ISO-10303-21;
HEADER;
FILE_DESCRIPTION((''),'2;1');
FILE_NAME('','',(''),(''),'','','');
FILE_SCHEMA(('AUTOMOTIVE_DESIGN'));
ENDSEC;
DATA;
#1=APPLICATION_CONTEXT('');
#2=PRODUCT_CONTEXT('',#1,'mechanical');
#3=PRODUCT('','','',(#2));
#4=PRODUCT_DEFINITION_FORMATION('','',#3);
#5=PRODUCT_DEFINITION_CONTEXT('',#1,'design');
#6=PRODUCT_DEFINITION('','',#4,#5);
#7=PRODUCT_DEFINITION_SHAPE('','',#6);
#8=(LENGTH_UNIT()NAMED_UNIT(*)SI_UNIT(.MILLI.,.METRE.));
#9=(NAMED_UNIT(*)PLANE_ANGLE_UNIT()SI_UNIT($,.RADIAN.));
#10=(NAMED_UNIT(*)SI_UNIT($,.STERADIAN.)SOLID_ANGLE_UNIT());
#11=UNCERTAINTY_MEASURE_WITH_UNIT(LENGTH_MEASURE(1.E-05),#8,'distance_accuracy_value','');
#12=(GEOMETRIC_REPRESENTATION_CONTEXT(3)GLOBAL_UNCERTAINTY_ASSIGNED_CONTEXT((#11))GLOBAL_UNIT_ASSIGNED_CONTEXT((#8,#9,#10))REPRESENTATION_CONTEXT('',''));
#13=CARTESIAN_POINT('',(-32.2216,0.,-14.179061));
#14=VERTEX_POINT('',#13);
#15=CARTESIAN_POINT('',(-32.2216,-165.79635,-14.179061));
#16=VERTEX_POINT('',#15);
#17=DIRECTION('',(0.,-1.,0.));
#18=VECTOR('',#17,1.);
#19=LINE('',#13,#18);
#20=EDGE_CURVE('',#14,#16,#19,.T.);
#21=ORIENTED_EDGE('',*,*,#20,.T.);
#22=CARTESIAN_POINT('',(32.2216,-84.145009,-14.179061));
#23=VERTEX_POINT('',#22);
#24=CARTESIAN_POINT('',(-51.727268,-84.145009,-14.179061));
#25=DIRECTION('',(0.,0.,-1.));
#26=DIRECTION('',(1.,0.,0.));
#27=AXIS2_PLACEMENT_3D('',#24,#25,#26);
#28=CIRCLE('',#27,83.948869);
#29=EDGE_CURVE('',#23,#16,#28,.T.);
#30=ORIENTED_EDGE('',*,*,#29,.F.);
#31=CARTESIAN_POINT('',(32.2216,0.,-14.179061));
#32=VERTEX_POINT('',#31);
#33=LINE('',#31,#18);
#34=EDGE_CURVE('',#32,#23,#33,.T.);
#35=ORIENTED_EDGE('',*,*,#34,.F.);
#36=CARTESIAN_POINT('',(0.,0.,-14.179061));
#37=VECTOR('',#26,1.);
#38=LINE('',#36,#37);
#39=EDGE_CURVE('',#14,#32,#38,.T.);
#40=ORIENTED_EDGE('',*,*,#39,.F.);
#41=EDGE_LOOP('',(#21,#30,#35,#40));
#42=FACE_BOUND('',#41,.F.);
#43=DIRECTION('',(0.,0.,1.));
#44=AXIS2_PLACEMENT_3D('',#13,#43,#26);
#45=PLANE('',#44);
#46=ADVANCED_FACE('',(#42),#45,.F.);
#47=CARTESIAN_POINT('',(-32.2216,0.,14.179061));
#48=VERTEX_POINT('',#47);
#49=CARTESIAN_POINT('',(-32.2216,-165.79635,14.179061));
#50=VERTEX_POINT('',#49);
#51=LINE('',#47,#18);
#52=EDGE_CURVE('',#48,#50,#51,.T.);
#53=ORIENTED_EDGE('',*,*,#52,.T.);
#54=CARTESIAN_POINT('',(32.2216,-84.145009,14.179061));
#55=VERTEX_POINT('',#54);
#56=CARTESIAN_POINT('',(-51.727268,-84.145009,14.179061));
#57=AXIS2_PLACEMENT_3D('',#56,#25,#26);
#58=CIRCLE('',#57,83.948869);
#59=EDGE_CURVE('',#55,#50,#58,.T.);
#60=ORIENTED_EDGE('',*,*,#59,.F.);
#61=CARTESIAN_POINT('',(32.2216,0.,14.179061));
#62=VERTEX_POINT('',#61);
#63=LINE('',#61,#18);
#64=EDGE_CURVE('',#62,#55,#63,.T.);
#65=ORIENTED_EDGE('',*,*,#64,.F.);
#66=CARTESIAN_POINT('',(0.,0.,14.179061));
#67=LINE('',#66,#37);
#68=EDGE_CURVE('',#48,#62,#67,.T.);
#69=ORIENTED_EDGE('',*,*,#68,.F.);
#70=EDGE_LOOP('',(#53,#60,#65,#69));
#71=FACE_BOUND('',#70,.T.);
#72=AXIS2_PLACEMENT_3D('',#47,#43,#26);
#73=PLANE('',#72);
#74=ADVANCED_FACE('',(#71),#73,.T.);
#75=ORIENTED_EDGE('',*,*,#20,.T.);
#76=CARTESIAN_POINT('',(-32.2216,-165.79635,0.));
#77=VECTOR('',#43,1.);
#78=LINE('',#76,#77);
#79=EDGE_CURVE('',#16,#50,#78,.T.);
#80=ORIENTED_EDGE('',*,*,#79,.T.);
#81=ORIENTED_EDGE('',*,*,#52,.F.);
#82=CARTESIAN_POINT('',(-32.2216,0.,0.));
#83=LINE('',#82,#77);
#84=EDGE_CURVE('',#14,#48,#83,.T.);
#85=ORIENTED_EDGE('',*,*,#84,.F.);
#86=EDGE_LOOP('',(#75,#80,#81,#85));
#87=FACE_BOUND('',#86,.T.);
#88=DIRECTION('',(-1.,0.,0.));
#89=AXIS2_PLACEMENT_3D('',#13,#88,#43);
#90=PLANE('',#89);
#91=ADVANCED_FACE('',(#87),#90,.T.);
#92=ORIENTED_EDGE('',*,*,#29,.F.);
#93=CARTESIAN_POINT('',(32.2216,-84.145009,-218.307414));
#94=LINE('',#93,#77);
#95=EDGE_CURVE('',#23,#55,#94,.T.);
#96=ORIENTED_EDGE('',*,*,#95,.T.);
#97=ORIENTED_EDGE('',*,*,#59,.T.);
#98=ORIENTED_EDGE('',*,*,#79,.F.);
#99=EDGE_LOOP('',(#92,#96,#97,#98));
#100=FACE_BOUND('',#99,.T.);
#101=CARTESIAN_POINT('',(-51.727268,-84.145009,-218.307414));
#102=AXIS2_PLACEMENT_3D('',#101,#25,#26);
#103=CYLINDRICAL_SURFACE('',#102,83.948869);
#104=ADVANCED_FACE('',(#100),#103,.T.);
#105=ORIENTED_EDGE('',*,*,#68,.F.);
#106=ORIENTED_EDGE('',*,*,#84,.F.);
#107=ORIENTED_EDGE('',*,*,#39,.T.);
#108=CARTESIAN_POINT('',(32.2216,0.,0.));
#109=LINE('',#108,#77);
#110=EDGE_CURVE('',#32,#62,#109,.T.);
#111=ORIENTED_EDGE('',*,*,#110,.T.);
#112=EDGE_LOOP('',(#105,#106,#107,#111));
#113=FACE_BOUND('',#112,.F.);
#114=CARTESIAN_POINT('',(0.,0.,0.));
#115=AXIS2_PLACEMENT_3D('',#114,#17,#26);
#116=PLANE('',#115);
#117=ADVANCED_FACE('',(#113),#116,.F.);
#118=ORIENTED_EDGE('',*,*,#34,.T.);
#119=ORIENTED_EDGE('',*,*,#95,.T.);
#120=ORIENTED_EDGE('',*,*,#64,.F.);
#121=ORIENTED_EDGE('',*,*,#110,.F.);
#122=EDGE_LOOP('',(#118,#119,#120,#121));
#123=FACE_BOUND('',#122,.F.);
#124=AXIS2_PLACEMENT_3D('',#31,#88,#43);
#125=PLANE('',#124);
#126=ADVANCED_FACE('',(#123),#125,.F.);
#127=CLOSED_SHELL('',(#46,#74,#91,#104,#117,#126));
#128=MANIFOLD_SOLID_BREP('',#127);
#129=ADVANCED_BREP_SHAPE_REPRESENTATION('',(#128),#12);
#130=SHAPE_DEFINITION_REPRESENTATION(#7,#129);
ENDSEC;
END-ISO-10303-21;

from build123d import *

# Parameters (mm, degrees)
F0_W        = 64.4432008266
F0_H        = 28.3581223339
F1_DEPTH    = 165.79635
F2_T1_DEPTH = 436.6148273869


# Not quite as in the source:
# - a fillet or chamfer that OpenCascade refuses, or shapes differently, is made with other operations: its cross-section is extruded or revolved along the edge and cut away or added


with BuildPart() as f1:
    # F0 (on Front) → F1 (new body)
    with BuildSketch(Plane.XZ):
        Rectangle(F0_W, F0_H)
    extrude(amount=F1_DEPTH)

    # F2: fillet of radius 83.9488687931 on 1 edges, made by hand

    # F2_s2 → F2_t1 (cut)
    with BuildSketch(Plane.XY.offset(-218.3074136934)):
        with BuildLine():
            ThreePointArc((32.2216004133, -84.1450089894), (14.1699672697, -136.1543053258), (-32.2216004133, -165.79635))
            Line((-32.2216004133, -165.79635), (32.2216004133, -165.79635))
            Line((32.2216004133, -165.79635), (32.2216004133, -84.1450089894))
        make_face()
    extrude(amount=F2_T1_DEPTH, mode=Mode.SUBTRACT)


solid = f1.part
